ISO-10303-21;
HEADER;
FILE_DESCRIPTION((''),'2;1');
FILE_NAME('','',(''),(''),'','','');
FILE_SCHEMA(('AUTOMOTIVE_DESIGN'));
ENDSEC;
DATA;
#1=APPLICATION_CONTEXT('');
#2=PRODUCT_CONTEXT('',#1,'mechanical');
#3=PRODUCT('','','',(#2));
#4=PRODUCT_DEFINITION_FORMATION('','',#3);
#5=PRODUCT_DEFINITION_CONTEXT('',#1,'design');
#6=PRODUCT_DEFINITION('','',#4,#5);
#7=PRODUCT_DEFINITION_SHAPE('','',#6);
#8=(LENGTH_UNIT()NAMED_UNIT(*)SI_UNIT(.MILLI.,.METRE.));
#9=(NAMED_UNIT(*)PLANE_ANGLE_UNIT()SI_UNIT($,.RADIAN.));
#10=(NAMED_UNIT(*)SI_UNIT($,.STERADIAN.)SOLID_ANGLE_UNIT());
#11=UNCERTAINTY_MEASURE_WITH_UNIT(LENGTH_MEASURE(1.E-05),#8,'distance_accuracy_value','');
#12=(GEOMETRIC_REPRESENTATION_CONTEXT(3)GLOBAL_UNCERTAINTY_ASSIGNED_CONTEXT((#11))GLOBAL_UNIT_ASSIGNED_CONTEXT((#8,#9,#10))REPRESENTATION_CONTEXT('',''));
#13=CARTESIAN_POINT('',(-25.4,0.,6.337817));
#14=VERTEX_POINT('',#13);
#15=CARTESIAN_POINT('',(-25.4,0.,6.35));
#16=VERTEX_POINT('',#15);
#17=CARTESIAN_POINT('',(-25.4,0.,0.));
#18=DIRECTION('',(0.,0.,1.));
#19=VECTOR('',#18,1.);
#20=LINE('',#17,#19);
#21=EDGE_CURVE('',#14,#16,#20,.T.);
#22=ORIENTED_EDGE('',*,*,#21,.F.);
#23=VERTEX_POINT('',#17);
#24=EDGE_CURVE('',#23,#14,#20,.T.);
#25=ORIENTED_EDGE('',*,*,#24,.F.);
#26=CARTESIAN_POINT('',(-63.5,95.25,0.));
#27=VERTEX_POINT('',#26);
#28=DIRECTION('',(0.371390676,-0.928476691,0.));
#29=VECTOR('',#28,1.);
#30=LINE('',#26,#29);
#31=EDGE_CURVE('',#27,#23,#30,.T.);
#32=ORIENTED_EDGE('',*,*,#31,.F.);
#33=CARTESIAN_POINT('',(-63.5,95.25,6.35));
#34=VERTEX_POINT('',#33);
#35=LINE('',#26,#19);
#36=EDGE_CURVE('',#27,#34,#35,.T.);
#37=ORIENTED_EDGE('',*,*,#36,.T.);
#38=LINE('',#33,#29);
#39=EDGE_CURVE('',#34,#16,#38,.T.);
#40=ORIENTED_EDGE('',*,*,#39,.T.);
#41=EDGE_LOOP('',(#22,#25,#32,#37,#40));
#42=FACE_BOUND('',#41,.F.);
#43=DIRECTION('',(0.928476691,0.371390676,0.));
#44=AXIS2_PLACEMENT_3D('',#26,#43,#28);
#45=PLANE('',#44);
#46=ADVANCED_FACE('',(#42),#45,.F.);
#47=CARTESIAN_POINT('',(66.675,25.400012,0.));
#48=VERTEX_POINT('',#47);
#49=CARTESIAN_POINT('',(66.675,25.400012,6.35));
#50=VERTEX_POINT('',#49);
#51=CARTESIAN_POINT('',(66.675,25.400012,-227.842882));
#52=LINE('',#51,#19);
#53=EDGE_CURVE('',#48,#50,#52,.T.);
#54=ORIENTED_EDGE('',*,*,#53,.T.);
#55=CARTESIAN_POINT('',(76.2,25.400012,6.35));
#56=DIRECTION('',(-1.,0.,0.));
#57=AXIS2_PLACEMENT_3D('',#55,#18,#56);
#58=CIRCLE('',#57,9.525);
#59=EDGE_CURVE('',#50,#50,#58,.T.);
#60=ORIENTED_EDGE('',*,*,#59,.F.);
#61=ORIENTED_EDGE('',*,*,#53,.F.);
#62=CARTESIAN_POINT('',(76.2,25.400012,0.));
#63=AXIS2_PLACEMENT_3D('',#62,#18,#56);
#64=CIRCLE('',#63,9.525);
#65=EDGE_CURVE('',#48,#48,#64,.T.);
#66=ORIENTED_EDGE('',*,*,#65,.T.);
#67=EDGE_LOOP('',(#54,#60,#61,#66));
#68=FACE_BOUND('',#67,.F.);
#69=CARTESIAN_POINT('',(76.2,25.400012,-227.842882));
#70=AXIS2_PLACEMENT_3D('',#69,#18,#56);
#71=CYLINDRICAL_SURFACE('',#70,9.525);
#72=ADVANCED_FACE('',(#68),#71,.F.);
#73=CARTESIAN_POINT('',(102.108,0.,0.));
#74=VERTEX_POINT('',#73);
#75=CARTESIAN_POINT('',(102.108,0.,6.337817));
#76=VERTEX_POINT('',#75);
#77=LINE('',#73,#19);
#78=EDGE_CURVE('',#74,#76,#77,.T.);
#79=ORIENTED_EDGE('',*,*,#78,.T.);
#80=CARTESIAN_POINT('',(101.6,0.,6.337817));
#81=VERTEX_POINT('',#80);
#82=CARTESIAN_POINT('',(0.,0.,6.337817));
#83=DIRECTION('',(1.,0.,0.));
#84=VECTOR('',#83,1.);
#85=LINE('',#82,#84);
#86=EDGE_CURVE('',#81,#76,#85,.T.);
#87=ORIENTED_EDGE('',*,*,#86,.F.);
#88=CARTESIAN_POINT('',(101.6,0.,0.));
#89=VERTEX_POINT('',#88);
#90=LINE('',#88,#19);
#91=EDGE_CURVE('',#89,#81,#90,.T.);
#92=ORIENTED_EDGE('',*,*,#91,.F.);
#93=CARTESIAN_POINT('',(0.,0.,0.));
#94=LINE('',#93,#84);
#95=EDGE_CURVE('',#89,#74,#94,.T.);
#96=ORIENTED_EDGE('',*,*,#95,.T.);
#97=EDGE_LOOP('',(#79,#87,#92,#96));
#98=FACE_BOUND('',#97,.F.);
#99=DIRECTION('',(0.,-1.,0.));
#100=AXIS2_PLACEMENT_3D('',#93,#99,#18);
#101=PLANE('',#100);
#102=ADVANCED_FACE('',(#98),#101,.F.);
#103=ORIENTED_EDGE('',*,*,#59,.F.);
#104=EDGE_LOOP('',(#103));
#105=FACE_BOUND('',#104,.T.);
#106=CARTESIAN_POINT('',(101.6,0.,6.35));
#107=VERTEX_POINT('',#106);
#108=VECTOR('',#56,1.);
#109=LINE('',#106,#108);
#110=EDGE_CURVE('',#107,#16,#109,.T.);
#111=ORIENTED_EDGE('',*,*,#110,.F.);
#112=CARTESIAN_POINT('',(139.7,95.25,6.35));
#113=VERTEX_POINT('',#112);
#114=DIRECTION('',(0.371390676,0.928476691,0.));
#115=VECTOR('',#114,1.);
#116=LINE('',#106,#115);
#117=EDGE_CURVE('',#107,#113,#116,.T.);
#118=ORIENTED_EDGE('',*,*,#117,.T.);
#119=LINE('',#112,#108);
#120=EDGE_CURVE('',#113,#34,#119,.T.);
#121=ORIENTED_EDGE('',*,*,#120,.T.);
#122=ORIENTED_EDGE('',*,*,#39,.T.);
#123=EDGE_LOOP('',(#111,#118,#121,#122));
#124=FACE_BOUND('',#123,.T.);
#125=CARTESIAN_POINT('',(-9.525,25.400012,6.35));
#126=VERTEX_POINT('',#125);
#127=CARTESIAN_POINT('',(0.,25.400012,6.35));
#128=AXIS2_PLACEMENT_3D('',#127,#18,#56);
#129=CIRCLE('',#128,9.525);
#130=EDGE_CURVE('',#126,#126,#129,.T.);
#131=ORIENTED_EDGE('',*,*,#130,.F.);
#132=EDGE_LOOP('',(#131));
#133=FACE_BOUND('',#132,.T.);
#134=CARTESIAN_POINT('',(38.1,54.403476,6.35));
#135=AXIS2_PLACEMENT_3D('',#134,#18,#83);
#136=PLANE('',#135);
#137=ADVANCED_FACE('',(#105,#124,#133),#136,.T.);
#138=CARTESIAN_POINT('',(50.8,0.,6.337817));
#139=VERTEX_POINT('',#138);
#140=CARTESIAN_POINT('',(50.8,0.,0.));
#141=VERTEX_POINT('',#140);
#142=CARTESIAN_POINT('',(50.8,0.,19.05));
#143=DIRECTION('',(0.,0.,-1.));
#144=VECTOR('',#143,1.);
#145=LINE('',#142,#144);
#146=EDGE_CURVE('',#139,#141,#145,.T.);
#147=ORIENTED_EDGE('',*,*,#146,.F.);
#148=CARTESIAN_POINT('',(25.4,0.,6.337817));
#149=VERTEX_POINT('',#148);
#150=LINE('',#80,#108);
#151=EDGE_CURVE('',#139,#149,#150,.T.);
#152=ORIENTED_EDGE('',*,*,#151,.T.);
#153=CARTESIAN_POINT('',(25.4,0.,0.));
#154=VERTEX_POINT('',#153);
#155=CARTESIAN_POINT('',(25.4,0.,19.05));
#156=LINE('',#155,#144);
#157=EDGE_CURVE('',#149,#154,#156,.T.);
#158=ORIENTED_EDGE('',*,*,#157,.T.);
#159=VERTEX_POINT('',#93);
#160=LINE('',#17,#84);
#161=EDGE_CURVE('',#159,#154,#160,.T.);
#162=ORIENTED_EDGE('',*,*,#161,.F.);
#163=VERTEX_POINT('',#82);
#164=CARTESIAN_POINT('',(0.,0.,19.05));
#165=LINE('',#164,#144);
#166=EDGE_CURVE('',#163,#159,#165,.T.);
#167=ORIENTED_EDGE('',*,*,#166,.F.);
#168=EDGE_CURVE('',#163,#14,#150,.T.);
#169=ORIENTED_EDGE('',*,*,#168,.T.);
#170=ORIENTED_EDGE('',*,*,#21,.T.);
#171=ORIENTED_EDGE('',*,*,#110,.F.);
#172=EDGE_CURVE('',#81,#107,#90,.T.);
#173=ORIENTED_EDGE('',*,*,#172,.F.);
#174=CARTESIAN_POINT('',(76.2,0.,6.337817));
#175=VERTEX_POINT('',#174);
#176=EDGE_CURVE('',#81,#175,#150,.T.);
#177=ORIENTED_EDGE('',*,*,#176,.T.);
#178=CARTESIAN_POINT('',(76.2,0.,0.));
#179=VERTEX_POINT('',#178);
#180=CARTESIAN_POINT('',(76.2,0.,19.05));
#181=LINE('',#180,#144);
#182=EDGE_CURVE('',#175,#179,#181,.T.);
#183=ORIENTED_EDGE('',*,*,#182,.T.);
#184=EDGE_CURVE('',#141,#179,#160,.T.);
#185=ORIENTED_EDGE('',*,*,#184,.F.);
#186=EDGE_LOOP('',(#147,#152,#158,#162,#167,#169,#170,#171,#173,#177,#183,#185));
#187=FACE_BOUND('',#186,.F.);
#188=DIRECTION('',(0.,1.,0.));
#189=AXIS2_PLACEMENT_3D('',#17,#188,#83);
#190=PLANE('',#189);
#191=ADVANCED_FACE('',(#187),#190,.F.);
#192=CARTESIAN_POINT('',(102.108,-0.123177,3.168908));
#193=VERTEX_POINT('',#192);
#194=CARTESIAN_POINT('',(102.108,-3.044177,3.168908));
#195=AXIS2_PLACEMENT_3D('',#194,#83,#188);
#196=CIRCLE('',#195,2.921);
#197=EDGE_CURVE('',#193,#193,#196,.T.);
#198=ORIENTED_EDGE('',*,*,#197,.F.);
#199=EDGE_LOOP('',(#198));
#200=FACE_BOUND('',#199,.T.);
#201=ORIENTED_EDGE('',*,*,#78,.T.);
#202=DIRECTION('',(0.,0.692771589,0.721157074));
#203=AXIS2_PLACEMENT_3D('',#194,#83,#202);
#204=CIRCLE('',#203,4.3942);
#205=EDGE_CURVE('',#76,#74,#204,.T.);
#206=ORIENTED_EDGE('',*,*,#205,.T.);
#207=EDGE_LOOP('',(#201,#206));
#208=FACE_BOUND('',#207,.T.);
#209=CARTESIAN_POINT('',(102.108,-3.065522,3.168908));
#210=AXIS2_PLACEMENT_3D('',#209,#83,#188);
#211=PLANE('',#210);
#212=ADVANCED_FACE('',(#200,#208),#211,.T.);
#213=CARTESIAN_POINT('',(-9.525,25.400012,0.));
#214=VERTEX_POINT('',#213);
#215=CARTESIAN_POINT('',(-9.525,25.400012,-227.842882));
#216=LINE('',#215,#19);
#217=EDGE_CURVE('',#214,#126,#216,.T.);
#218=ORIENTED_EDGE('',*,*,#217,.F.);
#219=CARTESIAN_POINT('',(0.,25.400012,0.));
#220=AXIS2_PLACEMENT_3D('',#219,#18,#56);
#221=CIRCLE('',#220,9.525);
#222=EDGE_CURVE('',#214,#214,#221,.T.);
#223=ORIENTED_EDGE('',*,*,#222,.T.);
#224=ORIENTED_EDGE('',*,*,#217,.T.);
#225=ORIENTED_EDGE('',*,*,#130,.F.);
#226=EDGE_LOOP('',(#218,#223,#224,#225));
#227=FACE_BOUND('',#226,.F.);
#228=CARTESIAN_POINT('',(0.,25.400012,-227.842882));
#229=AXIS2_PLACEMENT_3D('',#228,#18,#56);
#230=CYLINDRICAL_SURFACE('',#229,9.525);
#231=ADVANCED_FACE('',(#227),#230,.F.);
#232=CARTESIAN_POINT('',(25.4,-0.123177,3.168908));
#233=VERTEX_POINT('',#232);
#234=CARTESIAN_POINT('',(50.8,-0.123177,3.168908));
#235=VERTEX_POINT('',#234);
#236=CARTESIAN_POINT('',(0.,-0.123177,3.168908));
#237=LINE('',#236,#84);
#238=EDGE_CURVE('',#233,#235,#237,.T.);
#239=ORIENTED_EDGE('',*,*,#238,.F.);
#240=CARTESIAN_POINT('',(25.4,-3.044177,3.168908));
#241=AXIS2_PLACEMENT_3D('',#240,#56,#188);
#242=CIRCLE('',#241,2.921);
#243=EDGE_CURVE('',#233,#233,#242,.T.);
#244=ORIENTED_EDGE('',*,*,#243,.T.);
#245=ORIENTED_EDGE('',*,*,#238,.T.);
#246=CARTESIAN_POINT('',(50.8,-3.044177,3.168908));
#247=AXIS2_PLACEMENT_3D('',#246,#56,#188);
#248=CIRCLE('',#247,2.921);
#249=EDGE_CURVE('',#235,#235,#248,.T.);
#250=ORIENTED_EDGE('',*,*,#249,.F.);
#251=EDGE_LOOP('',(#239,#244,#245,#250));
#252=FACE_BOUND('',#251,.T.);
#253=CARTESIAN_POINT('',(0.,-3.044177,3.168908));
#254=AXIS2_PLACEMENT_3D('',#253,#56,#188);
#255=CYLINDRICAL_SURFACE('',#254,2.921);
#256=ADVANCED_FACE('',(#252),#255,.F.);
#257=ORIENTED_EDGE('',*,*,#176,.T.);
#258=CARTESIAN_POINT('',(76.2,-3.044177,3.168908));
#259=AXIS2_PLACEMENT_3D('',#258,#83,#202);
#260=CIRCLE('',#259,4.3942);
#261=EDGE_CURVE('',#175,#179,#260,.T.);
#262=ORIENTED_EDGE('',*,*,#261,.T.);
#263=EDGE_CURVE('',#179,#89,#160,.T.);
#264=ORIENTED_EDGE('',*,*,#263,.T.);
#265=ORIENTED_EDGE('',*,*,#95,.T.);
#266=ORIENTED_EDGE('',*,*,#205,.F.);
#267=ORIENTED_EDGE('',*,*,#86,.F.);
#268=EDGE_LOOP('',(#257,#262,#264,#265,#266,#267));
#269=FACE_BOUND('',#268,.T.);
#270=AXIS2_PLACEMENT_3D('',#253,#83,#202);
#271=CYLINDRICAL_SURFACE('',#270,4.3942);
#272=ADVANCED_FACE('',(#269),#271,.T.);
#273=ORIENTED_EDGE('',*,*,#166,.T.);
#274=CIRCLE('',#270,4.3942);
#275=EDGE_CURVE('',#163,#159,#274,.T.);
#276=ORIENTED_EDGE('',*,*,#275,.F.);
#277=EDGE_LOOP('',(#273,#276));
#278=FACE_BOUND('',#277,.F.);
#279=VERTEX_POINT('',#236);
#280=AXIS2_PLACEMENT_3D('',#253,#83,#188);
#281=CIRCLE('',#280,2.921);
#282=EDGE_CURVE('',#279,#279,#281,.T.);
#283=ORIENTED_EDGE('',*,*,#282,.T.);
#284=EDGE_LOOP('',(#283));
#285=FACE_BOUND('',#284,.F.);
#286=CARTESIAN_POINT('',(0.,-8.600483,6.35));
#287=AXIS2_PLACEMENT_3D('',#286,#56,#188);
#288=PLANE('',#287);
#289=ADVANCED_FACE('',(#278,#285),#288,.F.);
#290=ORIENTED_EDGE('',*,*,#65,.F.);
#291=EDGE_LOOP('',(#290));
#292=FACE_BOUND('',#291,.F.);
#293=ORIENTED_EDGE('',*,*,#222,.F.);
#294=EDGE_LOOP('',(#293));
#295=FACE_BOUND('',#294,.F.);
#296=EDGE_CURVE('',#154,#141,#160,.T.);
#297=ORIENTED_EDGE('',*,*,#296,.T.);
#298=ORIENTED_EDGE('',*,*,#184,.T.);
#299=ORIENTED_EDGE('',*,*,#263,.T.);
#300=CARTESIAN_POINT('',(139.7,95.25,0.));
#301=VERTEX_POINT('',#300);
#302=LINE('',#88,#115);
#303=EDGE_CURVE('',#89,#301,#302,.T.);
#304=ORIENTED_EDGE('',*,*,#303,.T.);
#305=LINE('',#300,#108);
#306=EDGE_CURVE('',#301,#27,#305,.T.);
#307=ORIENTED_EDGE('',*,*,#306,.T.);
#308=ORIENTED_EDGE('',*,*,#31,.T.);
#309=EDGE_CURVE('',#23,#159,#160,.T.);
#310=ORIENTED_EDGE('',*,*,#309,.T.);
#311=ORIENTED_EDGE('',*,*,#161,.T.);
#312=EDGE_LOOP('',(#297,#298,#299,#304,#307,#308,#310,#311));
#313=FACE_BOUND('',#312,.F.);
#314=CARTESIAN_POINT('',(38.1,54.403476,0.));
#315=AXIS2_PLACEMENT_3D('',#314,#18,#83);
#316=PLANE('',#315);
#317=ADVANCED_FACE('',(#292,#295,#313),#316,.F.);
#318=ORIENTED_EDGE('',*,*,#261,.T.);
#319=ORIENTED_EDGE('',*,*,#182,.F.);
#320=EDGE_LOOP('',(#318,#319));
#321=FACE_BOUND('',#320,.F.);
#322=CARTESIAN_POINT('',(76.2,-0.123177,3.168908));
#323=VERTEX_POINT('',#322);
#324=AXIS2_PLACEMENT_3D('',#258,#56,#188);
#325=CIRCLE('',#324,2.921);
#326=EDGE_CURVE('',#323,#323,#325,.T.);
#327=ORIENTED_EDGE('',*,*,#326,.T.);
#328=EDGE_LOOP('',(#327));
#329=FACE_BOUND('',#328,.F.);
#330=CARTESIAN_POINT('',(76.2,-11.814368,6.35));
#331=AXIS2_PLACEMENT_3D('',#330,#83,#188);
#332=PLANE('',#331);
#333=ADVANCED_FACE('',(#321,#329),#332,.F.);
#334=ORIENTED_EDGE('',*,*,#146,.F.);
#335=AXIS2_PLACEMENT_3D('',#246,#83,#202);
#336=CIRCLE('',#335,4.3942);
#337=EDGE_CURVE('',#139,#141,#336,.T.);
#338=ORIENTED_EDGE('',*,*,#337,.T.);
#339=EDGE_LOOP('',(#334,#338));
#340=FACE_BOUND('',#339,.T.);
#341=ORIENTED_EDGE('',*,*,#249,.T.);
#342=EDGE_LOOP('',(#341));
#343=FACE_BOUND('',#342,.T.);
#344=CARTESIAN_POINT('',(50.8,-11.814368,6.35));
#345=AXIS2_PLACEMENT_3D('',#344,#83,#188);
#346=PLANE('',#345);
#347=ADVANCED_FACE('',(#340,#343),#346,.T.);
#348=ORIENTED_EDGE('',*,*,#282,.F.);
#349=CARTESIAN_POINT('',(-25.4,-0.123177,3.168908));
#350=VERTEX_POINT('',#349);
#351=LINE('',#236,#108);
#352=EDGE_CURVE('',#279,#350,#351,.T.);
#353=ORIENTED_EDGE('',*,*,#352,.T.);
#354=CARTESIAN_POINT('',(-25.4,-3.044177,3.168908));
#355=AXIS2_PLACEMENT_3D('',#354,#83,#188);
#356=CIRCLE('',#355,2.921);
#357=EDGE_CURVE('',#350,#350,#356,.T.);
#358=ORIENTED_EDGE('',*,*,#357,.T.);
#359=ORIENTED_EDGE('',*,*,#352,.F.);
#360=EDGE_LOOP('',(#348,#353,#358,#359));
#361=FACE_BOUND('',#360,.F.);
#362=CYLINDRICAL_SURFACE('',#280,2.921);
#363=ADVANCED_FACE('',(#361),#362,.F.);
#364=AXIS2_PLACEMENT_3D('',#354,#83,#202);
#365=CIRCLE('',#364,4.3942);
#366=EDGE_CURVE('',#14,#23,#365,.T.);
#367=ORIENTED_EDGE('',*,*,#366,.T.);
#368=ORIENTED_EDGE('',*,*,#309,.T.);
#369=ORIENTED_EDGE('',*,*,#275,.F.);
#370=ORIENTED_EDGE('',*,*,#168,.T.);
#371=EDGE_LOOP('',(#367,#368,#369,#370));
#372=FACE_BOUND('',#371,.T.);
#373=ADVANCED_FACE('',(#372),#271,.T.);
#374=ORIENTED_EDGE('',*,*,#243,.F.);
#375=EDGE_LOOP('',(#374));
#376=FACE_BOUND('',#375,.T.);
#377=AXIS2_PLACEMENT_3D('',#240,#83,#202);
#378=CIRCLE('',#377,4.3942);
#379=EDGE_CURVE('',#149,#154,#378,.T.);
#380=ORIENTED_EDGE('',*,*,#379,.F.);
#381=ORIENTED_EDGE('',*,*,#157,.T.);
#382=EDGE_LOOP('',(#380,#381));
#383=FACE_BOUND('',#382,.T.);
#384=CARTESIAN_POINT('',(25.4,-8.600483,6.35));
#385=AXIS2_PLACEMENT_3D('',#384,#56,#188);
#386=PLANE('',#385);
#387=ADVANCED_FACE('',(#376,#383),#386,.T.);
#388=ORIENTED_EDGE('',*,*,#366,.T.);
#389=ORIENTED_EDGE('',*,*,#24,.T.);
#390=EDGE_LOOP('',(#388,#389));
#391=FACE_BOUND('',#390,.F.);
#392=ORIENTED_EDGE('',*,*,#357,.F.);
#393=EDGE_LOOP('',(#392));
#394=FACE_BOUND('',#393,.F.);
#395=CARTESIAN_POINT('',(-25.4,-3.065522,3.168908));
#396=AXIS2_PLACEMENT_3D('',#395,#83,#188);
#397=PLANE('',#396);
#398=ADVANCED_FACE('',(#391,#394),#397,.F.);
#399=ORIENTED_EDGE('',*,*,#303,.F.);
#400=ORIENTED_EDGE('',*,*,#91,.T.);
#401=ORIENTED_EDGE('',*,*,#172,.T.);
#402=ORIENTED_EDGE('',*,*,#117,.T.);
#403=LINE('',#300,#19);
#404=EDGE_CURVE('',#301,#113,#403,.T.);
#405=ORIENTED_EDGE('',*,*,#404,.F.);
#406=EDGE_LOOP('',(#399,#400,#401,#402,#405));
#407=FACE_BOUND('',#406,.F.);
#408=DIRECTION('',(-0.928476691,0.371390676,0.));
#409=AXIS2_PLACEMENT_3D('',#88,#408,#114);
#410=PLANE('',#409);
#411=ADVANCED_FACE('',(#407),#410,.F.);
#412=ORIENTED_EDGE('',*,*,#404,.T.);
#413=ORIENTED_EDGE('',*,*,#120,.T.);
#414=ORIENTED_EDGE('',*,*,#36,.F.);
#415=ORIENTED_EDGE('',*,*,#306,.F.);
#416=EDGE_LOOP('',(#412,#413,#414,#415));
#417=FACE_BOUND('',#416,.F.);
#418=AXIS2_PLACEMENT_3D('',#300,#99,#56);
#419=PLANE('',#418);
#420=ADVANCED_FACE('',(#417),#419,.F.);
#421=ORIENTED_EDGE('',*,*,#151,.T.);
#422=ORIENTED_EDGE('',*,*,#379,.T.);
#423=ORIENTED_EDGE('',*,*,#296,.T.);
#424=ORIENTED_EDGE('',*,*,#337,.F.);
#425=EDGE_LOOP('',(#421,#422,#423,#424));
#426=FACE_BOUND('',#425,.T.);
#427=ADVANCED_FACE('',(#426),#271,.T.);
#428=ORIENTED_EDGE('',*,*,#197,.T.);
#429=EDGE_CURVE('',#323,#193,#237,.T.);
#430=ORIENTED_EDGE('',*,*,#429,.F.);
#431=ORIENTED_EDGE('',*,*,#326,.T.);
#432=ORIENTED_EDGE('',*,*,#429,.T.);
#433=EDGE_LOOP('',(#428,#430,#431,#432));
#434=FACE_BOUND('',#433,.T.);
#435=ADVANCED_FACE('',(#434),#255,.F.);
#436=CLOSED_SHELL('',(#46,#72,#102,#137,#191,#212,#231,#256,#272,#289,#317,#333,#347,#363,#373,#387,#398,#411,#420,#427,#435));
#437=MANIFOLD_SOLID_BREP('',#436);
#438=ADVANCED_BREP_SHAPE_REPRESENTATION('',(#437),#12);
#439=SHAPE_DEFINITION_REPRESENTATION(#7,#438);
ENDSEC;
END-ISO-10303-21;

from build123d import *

# Parameters (mm, degrees)
F1_DEPTH      = 6.35
F2_R          = 2.921
F3_DEPTH      = 102.108
F3_DEPTH_BACK = 25.4
F6_D          = 19.05
F7_W          = 25.4
F7_H          = 8.6004827172
F7_H_2        = 11.8143679574
F8_DEPTH      = 12.7


# Not quite as in the source:
# - a feature names something its author has since deleted; it is built from what else it names


with BuildPart() as f1:
    # F0 (on Top) → F1 (new body)
    with BuildSketch(Plane.XY):
        Polygon((139.7, 95.25), (-63.5, 95.25), (-25.4, 0), (101.6, 0), align=None)
    extrude(amount=F1_DEPTH)

    # F2 (on Right) → F3 (join, two sides)
    with BuildSketch(Plane.YZ) as f3_sk:
        with BuildLine():
            Line((0, 0), (0, 6.337816827))
            ThreePointArc((0, 6.337816827), (-7.4383769178, 3.1689084135), (0, 0))
        make_face()
        with Locations((-3.0441769178, 3.1689084135)):
            Circle(F2_R, mode=Mode.SUBTRACT)
    extrude(amount=F3_DEPTH)
    extrude(f3_sk.sketch, amount=-F3_DEPTH_BACK)

    # F6 (through all)
    with Locations(Plane(origin=(0, 0, 0), x_dir=(1, 0, 0), z_dir=(0, 0, -1))):
        with Locations((0, -25.400012026), (76.2, -25.400012026)):
            Hole(F6_D / 2)

    # F7 (on face) → F8 (cut, symmetric)
    with BuildSketch(Plane.XY.offset(6.35)):
        with Locations((12.7, -4.3002413586)):
            Rectangle(F7_W, F7_H)
        with Locations((63.5, -5.9071839787)):
            Rectangle(F7_W, F7_H_2)
    extrude(amount=F8_DEPTH, both=True, mode=Mode.SUBTRACT)


solid = f1.part
